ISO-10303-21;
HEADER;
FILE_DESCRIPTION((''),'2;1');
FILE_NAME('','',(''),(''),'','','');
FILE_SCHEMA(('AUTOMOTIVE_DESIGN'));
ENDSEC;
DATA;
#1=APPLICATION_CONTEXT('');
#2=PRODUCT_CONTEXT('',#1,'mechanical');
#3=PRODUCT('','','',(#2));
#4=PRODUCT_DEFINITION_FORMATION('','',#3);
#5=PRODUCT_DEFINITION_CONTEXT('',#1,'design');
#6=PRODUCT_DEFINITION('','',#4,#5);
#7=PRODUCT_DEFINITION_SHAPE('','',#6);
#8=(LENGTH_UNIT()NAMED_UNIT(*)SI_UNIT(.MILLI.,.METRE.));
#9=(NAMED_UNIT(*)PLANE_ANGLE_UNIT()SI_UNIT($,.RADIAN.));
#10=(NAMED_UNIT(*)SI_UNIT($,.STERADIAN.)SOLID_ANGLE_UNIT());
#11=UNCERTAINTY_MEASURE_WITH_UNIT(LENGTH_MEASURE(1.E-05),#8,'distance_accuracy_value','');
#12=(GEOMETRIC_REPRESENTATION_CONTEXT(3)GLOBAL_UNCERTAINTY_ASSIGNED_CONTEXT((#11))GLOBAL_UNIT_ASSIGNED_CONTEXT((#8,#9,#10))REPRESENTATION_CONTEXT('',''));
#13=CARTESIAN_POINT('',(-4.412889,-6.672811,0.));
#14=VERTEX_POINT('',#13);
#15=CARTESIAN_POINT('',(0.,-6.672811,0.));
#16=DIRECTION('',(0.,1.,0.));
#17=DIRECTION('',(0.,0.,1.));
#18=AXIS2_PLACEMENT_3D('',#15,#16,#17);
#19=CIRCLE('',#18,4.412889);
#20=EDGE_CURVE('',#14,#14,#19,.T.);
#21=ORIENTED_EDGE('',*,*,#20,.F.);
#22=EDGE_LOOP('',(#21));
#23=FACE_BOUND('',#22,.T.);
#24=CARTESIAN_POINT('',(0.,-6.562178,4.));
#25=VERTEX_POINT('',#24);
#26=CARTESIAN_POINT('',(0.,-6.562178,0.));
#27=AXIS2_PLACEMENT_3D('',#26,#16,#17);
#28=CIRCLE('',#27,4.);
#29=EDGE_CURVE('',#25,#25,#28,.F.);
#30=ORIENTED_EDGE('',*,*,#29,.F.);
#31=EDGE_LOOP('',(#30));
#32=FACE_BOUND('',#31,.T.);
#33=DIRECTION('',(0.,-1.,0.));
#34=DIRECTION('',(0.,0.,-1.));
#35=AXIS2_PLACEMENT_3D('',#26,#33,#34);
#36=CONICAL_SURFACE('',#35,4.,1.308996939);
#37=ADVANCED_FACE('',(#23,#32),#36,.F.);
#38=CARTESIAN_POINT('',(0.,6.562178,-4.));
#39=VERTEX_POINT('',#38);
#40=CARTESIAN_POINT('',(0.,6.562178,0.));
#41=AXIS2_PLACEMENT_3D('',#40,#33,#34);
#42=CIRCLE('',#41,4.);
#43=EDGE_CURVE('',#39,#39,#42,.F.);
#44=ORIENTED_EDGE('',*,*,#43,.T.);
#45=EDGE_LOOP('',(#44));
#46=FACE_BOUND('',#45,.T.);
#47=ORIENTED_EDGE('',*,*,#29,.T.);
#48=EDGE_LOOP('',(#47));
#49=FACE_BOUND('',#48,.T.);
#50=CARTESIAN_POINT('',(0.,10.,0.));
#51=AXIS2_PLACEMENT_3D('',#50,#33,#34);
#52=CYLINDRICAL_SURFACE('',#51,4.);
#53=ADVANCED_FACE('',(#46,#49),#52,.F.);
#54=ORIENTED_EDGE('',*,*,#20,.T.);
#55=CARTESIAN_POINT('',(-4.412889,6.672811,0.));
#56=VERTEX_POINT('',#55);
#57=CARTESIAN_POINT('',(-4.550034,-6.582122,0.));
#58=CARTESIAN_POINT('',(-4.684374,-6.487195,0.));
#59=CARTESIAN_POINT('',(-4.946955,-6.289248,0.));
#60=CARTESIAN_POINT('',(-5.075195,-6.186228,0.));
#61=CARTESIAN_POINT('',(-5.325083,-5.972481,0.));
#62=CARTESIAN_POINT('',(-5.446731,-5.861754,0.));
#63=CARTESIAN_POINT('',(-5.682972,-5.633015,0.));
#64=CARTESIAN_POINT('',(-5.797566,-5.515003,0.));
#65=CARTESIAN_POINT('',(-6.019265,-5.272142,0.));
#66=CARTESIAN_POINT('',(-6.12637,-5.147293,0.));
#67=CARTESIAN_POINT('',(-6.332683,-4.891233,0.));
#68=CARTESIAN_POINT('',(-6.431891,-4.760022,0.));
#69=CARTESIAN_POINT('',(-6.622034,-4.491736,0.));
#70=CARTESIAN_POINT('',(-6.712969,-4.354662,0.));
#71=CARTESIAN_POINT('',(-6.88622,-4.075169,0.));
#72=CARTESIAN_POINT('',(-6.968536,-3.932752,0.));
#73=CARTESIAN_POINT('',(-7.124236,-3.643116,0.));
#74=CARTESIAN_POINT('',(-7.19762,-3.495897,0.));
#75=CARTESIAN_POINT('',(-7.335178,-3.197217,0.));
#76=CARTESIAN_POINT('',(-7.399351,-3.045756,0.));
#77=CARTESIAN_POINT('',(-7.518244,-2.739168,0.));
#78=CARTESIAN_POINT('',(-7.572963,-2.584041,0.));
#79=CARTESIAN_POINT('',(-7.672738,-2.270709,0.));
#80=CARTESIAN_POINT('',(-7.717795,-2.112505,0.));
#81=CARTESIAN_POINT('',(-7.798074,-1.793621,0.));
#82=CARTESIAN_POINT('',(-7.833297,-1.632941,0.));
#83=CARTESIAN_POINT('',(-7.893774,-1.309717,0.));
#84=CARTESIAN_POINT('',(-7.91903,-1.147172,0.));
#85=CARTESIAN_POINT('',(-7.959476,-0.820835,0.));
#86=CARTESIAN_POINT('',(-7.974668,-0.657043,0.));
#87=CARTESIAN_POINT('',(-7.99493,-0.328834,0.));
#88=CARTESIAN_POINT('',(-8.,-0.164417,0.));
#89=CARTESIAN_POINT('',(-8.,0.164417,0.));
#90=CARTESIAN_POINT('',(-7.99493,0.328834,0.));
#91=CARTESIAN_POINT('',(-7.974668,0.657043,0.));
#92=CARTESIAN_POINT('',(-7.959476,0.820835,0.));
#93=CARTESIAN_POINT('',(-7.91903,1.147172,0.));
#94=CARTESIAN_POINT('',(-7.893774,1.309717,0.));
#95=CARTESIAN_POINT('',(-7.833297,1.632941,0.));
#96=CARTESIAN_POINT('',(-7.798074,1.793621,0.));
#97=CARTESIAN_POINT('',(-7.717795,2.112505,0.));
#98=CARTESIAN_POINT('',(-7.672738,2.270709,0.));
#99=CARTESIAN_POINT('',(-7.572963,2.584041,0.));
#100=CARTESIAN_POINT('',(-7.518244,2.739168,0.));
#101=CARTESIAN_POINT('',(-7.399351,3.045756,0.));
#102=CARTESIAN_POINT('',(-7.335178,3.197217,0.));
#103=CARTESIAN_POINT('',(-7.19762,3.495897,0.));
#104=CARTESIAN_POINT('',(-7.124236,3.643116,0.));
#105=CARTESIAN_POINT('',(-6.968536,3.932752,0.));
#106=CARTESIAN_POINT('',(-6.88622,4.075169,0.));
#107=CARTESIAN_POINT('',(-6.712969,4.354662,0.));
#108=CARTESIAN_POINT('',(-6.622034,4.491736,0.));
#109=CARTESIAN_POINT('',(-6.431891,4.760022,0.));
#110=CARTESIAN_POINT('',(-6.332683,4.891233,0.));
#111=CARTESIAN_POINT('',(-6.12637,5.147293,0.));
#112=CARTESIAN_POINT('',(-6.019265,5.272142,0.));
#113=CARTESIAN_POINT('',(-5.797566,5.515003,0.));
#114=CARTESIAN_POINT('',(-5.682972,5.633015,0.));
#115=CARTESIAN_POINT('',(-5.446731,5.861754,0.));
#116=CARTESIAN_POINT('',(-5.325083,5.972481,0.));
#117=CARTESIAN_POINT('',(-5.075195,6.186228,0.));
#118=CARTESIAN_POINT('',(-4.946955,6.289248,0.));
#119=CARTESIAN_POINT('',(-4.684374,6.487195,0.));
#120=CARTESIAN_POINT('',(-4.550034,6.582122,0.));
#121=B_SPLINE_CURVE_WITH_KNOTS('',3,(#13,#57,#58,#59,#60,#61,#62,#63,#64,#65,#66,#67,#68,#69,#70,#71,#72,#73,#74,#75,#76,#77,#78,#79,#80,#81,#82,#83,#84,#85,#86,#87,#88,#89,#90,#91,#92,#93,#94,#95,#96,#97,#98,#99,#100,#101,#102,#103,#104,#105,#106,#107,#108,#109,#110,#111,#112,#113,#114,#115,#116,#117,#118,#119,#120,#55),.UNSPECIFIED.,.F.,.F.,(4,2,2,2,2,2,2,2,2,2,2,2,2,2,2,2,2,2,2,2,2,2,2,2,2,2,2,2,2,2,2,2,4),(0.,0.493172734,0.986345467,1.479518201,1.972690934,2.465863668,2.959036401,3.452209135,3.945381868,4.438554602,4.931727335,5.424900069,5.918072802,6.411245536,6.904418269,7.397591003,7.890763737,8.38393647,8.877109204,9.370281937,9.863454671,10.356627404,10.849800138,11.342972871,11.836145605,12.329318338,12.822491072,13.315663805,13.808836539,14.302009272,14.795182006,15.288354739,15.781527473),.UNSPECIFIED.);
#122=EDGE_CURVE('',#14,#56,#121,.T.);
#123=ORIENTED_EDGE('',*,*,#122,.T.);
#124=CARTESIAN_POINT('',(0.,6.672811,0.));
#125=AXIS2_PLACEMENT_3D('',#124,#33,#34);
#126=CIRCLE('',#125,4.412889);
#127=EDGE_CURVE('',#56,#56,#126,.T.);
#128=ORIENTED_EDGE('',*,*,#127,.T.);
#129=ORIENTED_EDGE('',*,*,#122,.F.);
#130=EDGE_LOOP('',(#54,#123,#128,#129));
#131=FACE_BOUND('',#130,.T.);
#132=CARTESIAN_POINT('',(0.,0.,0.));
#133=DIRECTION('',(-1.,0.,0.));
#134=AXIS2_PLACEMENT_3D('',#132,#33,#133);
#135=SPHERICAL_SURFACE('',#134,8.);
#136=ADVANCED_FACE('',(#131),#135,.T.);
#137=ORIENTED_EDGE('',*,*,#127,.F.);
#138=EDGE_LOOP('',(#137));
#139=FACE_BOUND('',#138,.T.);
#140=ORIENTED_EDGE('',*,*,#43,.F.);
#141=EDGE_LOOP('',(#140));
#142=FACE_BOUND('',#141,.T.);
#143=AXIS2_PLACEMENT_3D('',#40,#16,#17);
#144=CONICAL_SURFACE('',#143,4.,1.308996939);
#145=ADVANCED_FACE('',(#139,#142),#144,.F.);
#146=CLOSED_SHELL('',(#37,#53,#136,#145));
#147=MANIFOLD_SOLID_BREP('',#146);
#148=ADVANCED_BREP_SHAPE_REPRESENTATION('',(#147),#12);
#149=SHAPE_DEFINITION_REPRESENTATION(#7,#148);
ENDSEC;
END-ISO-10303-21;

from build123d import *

# Parameters (mm, degrees)
CORTAR_EXTRUIR1_DEPTH      = 10
CORTAR_EXTRUIR1_DEPTH_BACK = 10
CROQUIS3_R                 = 4
CHAFL_N1_SIZE              = 0.366025404


with BuildPart() as part:
    # Croquis1 → Revolución1 (revolve)
    with BuildSketch(Plane.XY):
        with BuildLine():
            Line((0, 0), (0, -8))
            ThreePointArc((0, -8), (8, 0), (0, 8))
            Line((0, 8), (0, 0))
        make_face()
    revolve(axis=Axis((0, -8, 0), (0, 1, 0)))

    # Croquis3 → Cortar-Extruir1 (cut, two sides: drawn at the far end of the back side and taken through both)
    with BuildSketch(Plane(origin=(0, 0, 0), x_dir=(1, 0, 0), z_dir=(0, 1, 0)).offset(-CORTAR_EXTRUIR1_DEPTH_BACK)):
        with Locations(Location((0, 0, 0), (0, 0, 180))):
            Circle(CROQUIS3_R)
    extrude(amount=CORTAR_EXTRUIR1_DEPTH + CORTAR_EXTRUIR1_DEPTH_BACK, mode=Mode.SUBTRACT)

    # Chaflán1
    # the kernel refuses this chamfer: 0.5, 0.366025404 mm, written as the material it takes off along each edge
    with BuildSketch(Plane(origin=(0, -6.92820323, 0), x_dir=(-1, 0, 0), z_dir=(0, 0, -1))) as chafl_n1_piece_1:
        with BuildLine():
            Line((4.412889217, 0.255392072), (4, CHAFL_N1_SIZE))
            Line((4, CHAFL_N1_SIZE), (4, 0))
            ThreePointArc((4, 0), (4.214206629, 0.128169224), (4.412889217, 0.255392072))
        make_face()
    revolve(axis=Axis((0, -6.92820323, 0), (0, 1, 0)), revolution_arc=180, mode=Mode.SUBTRACT)
    with BuildSketch(Plane(origin=(0, 6.92820323, 0), x_dir=(-1, 0, 0), z_dir=(0, 0, 1))) as chafl_n1_piece_2:
        with BuildLine():
            Line((4.412889217, 0.255392072), (4, CHAFL_N1_SIZE))
            Line((4, CHAFL_N1_SIZE), (4, 0))
            ThreePointArc((4, 0), (4.214206629, 0.128169224), (4.412889217, 0.255392072))
        make_face()
    revolve(axis=Axis((0, 6.92820323, 0), (0, -1, 0)), revolution_arc=180, mode=Mode.SUBTRACT)
    with BuildSketch(Plane(origin=(0, 6.92820323, 0), x_dir=(1, 0, 0), z_dir=(0, 0, -1))) as chafl_n1_piece_3:
        with BuildLine():
            Line((4.412889217, 0.255392072), (4, CHAFL_N1_SIZE))
            Line((4, CHAFL_N1_SIZE), (4, 0))
            ThreePointArc((4, 0), (4.214206629, 0.128169224), (4.412889217, 0.255392072))
        make_face()
    revolve(axis=Axis((0, 6.92820323, 0), (0, -1, 0)), revolution_arc=180, mode=Mode.SUBTRACT)
    with BuildSketch(Plane(origin=(0, -6.92820323, 0), x_dir=(1, 0, 0), z_dir=(0, 0, 1))) as chafl_n1_piece_4:
        with BuildLine():
            Line((4.412889217, 0.255392072), (4, CHAFL_N1_SIZE))
            Line((4, CHAFL_N1_SIZE), (4, 0))
            ThreePointArc((4, 0), (4.214206629, 0.128169224), (4.412889217, 0.255392072))
        make_face()
    revolve(axis=Axis((0, -6.92820323, 0), (0, 1, 0)), revolution_arc=180, mode=Mode.SUBTRACT)


solid = part.part
